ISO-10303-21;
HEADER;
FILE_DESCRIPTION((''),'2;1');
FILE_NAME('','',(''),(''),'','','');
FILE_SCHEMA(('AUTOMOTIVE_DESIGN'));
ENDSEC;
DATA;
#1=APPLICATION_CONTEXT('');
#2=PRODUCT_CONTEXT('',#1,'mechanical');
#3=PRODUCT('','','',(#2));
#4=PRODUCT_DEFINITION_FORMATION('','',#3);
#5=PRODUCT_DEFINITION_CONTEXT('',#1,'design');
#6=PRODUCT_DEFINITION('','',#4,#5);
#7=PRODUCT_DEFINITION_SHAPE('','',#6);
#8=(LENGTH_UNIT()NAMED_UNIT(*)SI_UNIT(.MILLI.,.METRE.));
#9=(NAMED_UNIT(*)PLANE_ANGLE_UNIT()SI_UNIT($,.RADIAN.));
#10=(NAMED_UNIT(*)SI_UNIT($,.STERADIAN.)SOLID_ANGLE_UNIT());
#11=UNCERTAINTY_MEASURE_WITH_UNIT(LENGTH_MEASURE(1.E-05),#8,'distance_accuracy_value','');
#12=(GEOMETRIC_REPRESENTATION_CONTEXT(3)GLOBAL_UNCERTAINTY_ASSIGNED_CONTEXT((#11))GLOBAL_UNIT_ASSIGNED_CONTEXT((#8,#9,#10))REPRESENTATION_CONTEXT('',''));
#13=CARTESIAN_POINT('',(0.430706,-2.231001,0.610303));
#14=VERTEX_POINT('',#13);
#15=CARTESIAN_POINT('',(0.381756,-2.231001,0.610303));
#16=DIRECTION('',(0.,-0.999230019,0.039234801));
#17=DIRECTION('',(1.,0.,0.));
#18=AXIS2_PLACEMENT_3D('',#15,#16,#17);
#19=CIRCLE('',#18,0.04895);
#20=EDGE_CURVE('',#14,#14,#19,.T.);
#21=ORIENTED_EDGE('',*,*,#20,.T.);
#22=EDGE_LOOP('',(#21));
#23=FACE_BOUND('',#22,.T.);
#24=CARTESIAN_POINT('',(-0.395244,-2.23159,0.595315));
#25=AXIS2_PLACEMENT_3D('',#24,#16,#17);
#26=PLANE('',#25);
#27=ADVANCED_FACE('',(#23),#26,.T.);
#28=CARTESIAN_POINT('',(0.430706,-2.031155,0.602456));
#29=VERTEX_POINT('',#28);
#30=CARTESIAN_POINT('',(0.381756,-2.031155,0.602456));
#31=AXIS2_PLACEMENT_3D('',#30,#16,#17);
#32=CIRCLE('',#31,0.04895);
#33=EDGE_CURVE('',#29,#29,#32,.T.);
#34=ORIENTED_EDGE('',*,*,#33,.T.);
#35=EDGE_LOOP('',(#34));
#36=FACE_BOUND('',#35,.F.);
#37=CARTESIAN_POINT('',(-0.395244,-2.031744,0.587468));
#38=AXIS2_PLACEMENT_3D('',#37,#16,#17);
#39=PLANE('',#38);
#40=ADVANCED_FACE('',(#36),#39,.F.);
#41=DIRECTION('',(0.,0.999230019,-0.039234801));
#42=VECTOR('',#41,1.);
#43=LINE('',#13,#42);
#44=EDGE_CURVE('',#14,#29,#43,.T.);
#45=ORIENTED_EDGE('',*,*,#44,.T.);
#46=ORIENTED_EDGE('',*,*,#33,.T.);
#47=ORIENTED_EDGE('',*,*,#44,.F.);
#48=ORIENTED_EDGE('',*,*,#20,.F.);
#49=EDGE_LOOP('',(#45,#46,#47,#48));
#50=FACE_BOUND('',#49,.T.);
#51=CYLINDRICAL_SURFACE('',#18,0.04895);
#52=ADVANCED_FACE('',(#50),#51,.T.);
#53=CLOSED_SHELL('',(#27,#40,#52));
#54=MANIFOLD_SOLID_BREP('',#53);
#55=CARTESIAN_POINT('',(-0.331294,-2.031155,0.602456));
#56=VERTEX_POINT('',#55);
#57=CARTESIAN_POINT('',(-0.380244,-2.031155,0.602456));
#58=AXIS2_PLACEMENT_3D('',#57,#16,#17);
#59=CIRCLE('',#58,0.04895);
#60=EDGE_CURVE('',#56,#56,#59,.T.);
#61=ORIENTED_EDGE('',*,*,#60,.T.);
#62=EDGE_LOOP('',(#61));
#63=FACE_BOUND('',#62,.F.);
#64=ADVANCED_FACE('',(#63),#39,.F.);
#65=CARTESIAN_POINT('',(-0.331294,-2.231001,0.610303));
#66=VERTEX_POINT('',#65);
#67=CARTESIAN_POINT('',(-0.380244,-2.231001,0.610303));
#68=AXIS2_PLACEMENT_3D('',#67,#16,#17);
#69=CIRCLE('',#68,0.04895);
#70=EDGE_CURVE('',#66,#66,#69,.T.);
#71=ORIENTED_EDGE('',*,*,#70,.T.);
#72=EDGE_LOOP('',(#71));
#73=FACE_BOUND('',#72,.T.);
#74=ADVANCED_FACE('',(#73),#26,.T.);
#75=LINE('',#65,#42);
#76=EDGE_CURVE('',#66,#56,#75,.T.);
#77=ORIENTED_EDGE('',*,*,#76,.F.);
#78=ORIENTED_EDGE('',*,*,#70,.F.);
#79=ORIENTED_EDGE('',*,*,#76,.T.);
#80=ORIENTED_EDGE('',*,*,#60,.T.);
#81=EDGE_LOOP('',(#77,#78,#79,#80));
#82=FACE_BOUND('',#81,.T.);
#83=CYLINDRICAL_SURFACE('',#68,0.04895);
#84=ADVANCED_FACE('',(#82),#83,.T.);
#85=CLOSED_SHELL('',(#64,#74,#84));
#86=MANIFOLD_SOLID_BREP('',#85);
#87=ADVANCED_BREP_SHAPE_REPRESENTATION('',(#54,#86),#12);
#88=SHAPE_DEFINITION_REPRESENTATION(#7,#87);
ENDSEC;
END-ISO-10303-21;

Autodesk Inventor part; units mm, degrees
ref_plane "YZ Plane" through (0, 0, 0) normal (1, 0, 0) x (0, 1, 0)
ref_plane "XZ Plane" through (0, 0, 0) normal (0, 1, 0) x (-1, 0, 0)
ref_plane "XY Plane" through (0, 0, 0) normal (0, 0, 1) x (1, 0, 0)
sketch "Sketch1" plane through (-0.395244, -2.23159, 0.595315) normal (0, -0.99923, 0.0392348) x (1, 0, 0)
  line L0 (0.049998, -0.019223) -> (0.049998, 0.050781)
  line L1 (0.049998, 0.050781) -> (-0.019998, 0.050781)
  line L2 (0.03, 0.03) -> (0, 0.03)
  line L3 (0.03, 0) -> (0.03, 0.03)
  line L4 (0, 0) -> (0.03, 0)
  line L5 (0, 0.03) -> (0, 0)
  line L6 (-0.019998, 0.050781) -> (-0.019998, -0.019223)
  line L7 (-0.019998, -0.019223) -> (0.049998, -0.019223)
  line L8 (0.811998, 0.050781) -> (0.742002, 0.050781)
  line L9 (0.811998, -0.019223) -> (0.811998, 0.050781)
  ellipse E0 centre (0.815195, 0.015) end of major axis (0.815195, 0.051066) minor radius 0.025506
  line L10 (0.792, 0.03) -> (0.792, 0)
  line L11 (0.792, 0.03) -> (0.762, 0.03)
  line L12 (0.742002, 0.050781) -> (0.742002, -0.019223)
  line L13 (0.792, 0) -> (0.762, 0)
  line L14 (0.762, 0) -> (0.762, 0.03)
  line L15 (0.742002, -0.019223) -> (0.811998, -0.019223)
  circle A0 centre (0.777, 0.015) radius 0.04895
  line L16 (0.792, 0.03) -> (0.762, 0)
  line L17 (0.762, 0.03) -> (0.792, 0)
  line L18 (0.03, 0.03) -> (0, 0)
  line L19 (0, 0.03) -> (0.03, 0)
  circle A1 centre (0.015, 0.015) radius 0.04895
  point P0 (0.395244, -0.507301)
sketch "Sketch1 outline for Extrusion1" plane through (-0.395244, -2.23159, 0.595315) normal (0, -0.99923, 0.0392348) x (1, 0, 0)
  circle A0 centre (0.777, 0.015) radius 0.04895
  circle A1 centre (0.015, 0.015) radius 0.04895
extrude "Extrusion1" add sketch "Sketch1 outline for Extrusion1" against normal blind 0.2
properties part number "MQ2"
